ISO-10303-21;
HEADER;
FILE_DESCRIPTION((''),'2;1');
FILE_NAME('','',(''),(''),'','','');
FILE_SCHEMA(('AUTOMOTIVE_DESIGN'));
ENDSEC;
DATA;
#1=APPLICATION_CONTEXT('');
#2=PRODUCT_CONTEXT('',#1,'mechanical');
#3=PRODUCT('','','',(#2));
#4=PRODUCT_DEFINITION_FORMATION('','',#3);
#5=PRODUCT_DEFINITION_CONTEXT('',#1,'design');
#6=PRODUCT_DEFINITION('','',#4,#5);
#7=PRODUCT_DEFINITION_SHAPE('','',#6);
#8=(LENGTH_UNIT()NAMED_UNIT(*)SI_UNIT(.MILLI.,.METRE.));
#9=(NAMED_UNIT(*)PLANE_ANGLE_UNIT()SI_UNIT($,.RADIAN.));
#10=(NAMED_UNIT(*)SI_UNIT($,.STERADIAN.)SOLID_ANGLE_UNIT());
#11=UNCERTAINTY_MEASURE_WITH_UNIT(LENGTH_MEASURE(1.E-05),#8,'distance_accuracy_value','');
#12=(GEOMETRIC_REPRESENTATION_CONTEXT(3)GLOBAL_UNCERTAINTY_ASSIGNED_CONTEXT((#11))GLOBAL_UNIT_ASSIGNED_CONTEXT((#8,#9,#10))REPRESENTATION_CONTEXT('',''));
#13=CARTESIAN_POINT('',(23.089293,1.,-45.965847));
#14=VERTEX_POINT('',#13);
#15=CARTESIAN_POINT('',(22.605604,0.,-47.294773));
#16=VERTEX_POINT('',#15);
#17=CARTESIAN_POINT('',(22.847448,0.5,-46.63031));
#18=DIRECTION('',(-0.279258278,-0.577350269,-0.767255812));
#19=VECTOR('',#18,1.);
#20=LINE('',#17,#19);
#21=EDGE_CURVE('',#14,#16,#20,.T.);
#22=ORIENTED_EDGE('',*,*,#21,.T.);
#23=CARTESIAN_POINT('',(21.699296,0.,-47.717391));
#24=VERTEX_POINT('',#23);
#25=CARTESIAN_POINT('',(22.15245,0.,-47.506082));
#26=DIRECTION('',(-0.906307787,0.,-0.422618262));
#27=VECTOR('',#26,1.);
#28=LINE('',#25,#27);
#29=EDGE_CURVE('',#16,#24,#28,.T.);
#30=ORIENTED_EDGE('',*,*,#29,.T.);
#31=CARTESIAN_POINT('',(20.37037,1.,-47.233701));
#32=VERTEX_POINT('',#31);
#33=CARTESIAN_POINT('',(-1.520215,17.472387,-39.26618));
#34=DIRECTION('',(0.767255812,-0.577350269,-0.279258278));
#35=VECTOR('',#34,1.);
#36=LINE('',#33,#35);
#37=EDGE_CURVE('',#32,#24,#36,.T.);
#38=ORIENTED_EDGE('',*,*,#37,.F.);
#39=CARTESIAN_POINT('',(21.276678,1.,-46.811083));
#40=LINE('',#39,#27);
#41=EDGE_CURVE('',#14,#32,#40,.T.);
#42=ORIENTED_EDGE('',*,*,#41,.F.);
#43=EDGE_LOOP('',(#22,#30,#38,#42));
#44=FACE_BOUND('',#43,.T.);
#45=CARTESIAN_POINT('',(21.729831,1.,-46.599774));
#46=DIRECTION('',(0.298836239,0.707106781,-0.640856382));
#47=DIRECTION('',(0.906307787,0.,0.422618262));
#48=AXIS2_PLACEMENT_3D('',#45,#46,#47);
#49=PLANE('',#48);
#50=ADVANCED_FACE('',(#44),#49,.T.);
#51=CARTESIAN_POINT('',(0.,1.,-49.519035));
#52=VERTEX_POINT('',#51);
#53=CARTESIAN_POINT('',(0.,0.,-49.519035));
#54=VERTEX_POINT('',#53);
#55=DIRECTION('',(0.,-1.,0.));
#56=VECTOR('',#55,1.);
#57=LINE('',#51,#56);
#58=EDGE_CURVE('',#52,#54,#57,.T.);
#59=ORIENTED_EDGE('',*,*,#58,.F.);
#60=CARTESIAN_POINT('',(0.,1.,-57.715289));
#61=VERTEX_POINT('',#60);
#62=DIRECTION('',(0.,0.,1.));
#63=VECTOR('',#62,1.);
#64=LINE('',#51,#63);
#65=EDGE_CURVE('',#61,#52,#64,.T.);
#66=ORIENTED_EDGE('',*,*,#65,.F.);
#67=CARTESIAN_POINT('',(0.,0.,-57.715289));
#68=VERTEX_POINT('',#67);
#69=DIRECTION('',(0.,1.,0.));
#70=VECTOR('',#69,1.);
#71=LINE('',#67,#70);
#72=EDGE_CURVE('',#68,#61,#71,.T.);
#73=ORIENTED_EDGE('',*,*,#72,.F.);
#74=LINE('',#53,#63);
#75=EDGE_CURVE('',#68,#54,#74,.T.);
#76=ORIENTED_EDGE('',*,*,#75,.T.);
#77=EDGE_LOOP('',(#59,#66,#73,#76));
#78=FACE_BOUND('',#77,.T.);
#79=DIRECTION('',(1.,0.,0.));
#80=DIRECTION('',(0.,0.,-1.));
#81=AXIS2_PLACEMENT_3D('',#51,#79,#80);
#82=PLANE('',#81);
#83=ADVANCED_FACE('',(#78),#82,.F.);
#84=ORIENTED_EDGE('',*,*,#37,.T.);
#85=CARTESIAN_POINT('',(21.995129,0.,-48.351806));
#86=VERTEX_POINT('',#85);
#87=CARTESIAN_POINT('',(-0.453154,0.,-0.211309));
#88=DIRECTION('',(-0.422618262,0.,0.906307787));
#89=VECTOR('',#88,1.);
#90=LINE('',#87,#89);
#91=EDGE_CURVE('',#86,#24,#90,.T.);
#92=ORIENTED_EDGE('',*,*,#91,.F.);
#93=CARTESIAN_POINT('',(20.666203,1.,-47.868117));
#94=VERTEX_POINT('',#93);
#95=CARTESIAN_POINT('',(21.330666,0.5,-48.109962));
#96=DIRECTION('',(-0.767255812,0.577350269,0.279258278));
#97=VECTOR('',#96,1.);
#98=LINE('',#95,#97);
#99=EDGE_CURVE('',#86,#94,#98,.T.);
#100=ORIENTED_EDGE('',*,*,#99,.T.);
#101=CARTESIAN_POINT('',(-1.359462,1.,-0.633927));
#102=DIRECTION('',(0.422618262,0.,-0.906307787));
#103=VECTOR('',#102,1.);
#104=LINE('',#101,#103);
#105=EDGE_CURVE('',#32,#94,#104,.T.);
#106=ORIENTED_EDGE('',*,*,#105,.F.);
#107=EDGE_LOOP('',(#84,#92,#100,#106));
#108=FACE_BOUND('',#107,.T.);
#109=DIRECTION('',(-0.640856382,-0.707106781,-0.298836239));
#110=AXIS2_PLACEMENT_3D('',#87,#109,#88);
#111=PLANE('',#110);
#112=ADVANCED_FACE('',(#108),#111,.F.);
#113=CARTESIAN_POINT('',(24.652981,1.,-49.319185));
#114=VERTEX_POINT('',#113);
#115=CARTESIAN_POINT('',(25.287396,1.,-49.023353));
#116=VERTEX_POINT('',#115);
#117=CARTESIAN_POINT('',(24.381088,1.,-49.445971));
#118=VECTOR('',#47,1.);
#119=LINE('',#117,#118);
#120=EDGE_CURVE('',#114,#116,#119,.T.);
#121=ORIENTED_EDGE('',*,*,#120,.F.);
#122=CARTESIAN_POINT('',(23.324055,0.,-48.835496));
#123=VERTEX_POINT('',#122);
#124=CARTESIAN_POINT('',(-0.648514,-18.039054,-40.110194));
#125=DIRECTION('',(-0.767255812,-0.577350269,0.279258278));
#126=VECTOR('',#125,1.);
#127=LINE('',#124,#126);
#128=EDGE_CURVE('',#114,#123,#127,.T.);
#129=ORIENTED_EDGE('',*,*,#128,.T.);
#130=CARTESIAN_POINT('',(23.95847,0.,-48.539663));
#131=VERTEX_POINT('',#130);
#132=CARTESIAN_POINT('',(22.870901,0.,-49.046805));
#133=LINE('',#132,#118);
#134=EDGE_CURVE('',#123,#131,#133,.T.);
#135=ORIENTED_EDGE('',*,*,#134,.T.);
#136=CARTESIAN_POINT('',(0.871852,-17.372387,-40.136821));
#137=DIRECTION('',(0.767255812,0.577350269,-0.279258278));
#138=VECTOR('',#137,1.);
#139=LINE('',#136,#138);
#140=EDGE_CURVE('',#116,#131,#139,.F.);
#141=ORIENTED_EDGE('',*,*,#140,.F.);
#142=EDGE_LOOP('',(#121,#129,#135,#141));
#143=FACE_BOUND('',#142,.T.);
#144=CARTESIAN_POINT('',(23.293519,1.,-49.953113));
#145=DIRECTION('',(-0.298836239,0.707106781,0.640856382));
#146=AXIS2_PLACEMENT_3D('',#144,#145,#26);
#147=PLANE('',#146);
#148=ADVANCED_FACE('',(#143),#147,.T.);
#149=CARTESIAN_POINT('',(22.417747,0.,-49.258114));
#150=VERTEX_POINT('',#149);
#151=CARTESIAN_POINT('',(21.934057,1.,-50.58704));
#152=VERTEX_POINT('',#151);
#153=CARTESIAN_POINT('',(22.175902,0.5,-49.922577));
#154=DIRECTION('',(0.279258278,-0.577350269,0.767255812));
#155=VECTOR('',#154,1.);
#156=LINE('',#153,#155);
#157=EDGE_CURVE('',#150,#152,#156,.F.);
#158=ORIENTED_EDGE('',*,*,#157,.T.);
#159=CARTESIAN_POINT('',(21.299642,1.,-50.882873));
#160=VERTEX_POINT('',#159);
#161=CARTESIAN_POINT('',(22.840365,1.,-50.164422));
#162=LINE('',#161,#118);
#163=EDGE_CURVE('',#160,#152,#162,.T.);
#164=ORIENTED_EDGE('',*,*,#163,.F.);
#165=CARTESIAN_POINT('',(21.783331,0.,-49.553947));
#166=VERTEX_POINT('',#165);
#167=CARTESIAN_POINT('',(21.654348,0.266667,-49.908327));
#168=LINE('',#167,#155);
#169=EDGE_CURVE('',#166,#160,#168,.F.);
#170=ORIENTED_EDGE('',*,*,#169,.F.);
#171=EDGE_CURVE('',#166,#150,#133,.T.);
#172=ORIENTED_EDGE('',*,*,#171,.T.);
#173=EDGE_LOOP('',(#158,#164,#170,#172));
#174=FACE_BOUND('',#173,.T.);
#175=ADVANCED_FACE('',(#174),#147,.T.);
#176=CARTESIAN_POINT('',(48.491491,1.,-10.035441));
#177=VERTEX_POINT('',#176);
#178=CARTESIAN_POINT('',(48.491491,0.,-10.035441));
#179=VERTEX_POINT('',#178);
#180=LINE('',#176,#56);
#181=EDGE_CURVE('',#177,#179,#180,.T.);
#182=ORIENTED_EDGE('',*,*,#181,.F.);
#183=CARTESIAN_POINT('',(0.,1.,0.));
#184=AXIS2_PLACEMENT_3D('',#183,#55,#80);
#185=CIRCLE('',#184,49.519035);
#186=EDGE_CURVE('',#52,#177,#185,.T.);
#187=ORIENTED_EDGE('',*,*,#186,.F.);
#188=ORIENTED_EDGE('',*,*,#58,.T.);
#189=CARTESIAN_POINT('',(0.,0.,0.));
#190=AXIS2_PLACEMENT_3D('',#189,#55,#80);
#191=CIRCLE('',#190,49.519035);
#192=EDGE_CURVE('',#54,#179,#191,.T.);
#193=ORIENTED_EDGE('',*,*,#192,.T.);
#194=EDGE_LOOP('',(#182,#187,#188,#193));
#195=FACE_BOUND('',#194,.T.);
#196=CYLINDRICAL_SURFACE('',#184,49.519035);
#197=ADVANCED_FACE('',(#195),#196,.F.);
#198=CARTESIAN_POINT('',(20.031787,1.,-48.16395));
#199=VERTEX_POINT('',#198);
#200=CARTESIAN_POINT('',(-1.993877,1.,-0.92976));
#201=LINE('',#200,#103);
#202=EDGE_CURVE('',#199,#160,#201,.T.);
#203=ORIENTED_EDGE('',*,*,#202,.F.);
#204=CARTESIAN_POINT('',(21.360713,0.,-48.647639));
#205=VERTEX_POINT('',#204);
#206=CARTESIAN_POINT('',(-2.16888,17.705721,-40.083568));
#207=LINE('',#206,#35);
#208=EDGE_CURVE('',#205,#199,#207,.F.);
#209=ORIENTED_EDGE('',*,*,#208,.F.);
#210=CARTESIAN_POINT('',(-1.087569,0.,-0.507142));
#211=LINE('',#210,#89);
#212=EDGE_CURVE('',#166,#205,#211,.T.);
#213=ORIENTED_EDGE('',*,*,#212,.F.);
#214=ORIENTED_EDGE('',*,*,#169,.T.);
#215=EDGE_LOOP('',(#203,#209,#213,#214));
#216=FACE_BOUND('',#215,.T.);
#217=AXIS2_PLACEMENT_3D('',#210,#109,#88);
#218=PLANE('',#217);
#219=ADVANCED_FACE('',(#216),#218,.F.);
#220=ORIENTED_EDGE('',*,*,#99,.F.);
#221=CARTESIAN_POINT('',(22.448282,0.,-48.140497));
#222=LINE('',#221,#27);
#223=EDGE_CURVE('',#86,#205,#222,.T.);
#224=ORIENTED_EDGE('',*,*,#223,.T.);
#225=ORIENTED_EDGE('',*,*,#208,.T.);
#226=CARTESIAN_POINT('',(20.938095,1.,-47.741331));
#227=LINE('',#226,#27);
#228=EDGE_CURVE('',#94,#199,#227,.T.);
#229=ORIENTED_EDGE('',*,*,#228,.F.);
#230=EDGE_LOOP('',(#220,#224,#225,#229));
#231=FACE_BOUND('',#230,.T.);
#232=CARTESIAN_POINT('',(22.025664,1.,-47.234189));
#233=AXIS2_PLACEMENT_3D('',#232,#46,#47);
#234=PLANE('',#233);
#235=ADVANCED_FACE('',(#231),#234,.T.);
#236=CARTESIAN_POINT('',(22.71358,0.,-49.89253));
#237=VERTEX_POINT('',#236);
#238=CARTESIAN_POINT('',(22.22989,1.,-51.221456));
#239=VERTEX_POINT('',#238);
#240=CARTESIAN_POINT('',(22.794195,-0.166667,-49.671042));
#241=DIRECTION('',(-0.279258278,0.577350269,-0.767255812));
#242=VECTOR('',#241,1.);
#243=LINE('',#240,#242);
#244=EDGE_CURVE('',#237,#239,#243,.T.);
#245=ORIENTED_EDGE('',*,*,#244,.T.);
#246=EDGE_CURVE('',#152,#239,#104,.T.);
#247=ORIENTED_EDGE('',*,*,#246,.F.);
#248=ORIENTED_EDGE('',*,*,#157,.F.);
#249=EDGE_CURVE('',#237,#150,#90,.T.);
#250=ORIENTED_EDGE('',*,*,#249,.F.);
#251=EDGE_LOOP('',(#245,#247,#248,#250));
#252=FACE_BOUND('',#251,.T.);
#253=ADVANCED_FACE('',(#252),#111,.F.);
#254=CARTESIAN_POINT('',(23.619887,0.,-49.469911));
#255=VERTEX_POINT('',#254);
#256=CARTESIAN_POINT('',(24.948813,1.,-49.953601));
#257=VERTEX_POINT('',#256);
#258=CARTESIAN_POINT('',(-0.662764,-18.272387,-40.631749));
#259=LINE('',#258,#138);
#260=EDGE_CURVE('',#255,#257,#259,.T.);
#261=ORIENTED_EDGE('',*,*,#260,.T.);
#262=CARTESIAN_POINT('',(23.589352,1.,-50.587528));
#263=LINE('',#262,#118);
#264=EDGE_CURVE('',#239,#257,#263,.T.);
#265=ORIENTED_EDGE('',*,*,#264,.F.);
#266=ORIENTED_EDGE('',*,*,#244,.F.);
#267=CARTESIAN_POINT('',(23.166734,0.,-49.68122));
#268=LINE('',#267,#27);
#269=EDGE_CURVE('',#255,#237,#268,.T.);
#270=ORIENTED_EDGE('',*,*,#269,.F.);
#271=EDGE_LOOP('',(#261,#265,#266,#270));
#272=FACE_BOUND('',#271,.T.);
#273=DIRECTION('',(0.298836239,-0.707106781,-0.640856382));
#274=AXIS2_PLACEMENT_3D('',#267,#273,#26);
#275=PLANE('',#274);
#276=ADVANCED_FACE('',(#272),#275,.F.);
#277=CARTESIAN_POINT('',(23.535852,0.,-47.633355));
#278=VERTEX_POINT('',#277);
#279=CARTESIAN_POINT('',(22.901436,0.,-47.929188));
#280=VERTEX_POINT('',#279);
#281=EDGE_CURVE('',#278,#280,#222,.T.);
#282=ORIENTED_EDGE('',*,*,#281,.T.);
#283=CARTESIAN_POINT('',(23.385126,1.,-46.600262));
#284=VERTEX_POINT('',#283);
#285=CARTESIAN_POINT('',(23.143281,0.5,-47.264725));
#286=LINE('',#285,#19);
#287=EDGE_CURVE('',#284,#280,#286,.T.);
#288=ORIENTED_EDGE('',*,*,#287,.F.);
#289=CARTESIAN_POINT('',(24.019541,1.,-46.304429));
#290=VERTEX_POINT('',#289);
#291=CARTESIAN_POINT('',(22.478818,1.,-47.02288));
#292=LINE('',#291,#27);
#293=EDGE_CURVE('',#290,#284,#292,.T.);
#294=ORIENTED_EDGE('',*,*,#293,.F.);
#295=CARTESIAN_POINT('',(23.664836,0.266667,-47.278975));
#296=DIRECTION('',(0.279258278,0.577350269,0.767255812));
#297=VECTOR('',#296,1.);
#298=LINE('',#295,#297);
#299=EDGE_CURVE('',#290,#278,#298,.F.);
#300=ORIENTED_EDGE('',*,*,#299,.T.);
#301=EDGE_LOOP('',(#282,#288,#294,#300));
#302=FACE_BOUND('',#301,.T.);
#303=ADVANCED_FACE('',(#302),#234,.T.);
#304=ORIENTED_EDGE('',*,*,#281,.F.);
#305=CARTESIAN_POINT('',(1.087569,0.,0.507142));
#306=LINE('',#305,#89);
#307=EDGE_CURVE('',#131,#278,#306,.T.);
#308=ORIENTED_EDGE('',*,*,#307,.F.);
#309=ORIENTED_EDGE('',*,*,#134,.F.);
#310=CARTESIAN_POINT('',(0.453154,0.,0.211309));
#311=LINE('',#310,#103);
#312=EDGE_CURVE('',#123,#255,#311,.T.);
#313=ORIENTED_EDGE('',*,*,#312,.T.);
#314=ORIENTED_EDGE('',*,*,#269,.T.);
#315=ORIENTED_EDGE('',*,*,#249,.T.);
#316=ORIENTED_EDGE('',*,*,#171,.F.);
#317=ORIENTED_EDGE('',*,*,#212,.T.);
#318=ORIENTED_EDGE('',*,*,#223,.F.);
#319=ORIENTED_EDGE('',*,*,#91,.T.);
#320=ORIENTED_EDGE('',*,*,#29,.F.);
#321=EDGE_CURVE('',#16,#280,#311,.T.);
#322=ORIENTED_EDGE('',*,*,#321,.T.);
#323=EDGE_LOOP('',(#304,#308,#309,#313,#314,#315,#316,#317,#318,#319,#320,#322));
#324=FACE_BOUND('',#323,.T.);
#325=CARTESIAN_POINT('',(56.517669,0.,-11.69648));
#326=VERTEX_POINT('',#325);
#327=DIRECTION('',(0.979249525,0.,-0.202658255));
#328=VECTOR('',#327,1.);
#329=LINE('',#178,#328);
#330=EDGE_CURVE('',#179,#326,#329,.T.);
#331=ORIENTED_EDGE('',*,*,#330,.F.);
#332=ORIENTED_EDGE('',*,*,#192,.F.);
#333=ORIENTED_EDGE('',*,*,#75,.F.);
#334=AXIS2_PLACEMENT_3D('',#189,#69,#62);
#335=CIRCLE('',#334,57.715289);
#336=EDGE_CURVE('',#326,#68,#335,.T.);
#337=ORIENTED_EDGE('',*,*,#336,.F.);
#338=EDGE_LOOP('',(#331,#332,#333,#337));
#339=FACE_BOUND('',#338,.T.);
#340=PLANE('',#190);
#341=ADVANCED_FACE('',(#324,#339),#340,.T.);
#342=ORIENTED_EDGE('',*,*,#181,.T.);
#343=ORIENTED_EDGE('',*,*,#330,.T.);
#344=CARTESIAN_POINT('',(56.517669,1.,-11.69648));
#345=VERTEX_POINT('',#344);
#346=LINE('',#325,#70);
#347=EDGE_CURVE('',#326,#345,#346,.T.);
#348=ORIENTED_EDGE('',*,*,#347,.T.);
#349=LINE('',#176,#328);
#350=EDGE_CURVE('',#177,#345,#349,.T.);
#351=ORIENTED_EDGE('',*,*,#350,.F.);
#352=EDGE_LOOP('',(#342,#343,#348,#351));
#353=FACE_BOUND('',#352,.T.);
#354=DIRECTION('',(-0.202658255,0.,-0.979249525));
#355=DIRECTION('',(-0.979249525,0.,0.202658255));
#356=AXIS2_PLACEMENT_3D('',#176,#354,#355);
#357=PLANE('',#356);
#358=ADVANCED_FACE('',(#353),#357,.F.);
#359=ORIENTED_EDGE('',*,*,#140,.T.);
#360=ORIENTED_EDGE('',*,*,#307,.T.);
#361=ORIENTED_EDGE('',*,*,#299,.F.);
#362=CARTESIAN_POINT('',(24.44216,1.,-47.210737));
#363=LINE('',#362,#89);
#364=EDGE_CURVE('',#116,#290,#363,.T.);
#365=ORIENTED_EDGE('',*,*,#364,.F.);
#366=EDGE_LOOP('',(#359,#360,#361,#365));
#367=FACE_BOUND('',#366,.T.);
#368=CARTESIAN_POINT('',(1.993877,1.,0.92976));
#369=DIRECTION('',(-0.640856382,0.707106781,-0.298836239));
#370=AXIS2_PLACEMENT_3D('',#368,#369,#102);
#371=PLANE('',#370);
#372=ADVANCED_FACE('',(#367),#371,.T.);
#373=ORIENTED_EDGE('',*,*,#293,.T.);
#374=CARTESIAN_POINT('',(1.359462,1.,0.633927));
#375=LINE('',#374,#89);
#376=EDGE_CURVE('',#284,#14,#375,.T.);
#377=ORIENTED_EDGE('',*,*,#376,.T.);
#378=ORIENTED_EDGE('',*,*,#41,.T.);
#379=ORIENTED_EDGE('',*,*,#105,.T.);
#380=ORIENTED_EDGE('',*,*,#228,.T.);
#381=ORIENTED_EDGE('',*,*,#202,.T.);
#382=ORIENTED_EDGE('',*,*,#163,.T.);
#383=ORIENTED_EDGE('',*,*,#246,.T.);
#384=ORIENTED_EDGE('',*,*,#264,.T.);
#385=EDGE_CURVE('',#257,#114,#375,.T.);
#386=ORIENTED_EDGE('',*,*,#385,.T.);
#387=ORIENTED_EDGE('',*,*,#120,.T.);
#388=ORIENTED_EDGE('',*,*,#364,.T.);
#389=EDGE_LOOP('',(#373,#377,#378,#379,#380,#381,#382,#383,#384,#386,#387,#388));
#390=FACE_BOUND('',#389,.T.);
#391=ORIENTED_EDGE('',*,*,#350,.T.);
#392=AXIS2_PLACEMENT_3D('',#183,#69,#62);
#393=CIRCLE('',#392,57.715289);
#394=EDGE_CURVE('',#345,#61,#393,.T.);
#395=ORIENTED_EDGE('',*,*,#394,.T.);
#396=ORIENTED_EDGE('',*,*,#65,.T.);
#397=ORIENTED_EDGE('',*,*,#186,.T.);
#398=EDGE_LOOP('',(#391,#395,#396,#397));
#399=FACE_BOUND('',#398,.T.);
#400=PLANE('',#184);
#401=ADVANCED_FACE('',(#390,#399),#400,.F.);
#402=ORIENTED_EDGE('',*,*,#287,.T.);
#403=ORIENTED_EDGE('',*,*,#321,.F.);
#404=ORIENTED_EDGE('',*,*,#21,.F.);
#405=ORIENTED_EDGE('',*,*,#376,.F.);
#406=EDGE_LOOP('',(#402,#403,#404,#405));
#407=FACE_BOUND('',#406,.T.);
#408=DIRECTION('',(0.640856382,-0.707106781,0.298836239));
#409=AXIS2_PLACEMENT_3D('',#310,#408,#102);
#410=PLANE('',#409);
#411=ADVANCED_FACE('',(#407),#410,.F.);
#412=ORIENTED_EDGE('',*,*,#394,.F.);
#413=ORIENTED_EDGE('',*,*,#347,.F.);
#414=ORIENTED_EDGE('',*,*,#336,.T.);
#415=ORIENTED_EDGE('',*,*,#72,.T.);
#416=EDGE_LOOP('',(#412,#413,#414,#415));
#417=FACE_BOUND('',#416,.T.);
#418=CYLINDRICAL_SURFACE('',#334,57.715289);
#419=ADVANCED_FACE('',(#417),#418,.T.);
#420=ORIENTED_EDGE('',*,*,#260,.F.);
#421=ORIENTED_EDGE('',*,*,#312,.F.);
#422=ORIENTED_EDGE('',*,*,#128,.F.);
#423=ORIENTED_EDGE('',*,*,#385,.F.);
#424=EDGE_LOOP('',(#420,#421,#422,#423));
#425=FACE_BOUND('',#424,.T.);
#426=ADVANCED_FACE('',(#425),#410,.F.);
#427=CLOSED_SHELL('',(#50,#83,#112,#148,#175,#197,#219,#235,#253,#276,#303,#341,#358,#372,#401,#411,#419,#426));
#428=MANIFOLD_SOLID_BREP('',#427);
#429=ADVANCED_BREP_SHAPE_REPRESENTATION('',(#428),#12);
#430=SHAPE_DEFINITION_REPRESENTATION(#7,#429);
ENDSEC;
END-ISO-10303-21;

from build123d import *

# Parameters (mm, degrees)
BOSS_EXTRUDE1_DEPTH = 1
CUT_EXTRUDE2_DEPTH  = 84.653220646
CUT_EXTRUDE1_DEPTH  = 81.785527353
CHAMFER1_SIZE       = 1


with BuildPart() as part:
    # Sketch1 → Boss-Extrude1 (new body)
    with BuildSketch(Plane(origin=(0, 0, 0), x_dir=(1, 0, 0), z_dir=(0, 1, 0))):
        with BuildLine():
            Line((0, 49.519034561), (0, 59.764352058))
            ThreePointArc((0, 59.764352058), (37.735444373, 46.3445144), (58.524213344, 12.111739322))
            Line((58.524213344, 12.111739322), (48.491491054, 10.03544116))
            ThreePointArc((48.491491054, 10.03544116), (31.266511048, 38.399740504), (0, 49.519034561))
        make_face()
    extrude(amount=BOSS_EXTRUDE1_DEPTH)

    # Sketch3 → Cut-Extrude2 (cut, through all)
    with BuildSketch(Plane(origin=(0, 1, 0), x_dir=(1, 0, 0), z_dir=(0, 1, 0))):
        with BuildLine():
            ThreePointArc((0, 57.715288559), (36.441657708, 44.75555962), (56.517668886, 11.69647969))
            Line((56.517668886, 11.69647969), (58.524213344, 12.111739322))
            ThreePointArc((58.524213344, 12.111739322), (37.735444373, 46.3445144), (0, 59.764352058))
            Line((0, 59.764352058), (0, 57.715288559))
        make_face()
    extrude(amount=-CUT_EXTRUDE2_DEPTH, mode=Mode.SUBTRACT)

    # Sketch2 → Cut-Extrude1 (cut, through all)
    with BuildSketch(Plane(origin=(0, 1, 0), x_dir=(1, 0, 0), z_dir=(0, 1, 0))):
        Polygon((23.166733532, 49.681220385), (22.870900749, 49.046804934), (23.324054642, 48.835495803), (23.619887426, 49.469911254), align=None)
        Polygon((22.417746855, 49.258114065), (22.870900749, 49.046804934), (23.166733532, 49.681220385), (22.713579639, 49.892529516), align=None)
        Polygon((22.206437724, 48.804960172), (22.659591618, 48.593651041), (22.870900749, 49.046804934), (22.417746855, 49.258114065), align=None)
        Polygon((21.360713143, 48.647639061), (21.995128594, 48.351806278), (22.206437724, 48.804960172), (22.417746855, 49.258114065), (21.783331404, 49.553946848), align=None)
        Polygon((21.995128594, 48.351806278), (22.448282487, 48.140497147), (22.659591618, 48.593651041), (22.206437724, 48.804960172), align=None)
        Polygon((21.69929581, 47.717390827), (22.152449704, 47.506081696), (22.448282487, 48.140497147), (21.995128594, 48.351806278), align=None)
        Polygon((22.448282487, 48.140497147), (22.152449704, 47.506081696), (22.605603597, 47.294772565), (22.901436381, 47.929188016), align=None)
        Polygon((22.659591618, 48.593651041), (22.448282487, 48.140497147), (22.901436381, 47.929188016), (23.112745512, 48.38234191), align=None)
        Polygon((23.112745512, 48.38234191), (22.901436381, 47.929188016), (23.535851832, 47.633355233), (23.958470093, 48.53966302), (23.324054642, 48.835495803), align=None)
        Polygon((22.870900749, 49.046804934), (22.659591618, 48.593651041), (23.112745512, 48.38234191), (23.324054642, 48.835495803), align=None)
    extrude(amount=-CUT_EXTRUDE1_DEPTH, mode=Mode.SUBTRACT)

    # Chamfer1
    chamfer1_edges = [part.edges().sort_by_distance(p)[0] for p in [
        (21.847212202, 1, -48.034598553),
        (22.152449704, 1, -47.506081696),
        (22.753519989, 1, -47.611980291),
        (23.218644106, 1, -47.781271625),
        (23.747160962, 1, -48.086509127),
        (23.641262368, 1, -48.687579412),
        (23.471971034, 1, -49.152703529),
        (23.166733532, 1, -49.681220385),
        (22.565663247, 1, -49.575321791),
        (22.10053913, 1, -49.406030457),
        (21.572022274, 1, -49.100792955),
        (21.677920868, 1, -48.49972267),
    ]]
    chamfer(chamfer1_edges, length=CHAMFER1_SIZE - 0.0001)  # a hair under: the kernel refuses the full size


solid = part.part
